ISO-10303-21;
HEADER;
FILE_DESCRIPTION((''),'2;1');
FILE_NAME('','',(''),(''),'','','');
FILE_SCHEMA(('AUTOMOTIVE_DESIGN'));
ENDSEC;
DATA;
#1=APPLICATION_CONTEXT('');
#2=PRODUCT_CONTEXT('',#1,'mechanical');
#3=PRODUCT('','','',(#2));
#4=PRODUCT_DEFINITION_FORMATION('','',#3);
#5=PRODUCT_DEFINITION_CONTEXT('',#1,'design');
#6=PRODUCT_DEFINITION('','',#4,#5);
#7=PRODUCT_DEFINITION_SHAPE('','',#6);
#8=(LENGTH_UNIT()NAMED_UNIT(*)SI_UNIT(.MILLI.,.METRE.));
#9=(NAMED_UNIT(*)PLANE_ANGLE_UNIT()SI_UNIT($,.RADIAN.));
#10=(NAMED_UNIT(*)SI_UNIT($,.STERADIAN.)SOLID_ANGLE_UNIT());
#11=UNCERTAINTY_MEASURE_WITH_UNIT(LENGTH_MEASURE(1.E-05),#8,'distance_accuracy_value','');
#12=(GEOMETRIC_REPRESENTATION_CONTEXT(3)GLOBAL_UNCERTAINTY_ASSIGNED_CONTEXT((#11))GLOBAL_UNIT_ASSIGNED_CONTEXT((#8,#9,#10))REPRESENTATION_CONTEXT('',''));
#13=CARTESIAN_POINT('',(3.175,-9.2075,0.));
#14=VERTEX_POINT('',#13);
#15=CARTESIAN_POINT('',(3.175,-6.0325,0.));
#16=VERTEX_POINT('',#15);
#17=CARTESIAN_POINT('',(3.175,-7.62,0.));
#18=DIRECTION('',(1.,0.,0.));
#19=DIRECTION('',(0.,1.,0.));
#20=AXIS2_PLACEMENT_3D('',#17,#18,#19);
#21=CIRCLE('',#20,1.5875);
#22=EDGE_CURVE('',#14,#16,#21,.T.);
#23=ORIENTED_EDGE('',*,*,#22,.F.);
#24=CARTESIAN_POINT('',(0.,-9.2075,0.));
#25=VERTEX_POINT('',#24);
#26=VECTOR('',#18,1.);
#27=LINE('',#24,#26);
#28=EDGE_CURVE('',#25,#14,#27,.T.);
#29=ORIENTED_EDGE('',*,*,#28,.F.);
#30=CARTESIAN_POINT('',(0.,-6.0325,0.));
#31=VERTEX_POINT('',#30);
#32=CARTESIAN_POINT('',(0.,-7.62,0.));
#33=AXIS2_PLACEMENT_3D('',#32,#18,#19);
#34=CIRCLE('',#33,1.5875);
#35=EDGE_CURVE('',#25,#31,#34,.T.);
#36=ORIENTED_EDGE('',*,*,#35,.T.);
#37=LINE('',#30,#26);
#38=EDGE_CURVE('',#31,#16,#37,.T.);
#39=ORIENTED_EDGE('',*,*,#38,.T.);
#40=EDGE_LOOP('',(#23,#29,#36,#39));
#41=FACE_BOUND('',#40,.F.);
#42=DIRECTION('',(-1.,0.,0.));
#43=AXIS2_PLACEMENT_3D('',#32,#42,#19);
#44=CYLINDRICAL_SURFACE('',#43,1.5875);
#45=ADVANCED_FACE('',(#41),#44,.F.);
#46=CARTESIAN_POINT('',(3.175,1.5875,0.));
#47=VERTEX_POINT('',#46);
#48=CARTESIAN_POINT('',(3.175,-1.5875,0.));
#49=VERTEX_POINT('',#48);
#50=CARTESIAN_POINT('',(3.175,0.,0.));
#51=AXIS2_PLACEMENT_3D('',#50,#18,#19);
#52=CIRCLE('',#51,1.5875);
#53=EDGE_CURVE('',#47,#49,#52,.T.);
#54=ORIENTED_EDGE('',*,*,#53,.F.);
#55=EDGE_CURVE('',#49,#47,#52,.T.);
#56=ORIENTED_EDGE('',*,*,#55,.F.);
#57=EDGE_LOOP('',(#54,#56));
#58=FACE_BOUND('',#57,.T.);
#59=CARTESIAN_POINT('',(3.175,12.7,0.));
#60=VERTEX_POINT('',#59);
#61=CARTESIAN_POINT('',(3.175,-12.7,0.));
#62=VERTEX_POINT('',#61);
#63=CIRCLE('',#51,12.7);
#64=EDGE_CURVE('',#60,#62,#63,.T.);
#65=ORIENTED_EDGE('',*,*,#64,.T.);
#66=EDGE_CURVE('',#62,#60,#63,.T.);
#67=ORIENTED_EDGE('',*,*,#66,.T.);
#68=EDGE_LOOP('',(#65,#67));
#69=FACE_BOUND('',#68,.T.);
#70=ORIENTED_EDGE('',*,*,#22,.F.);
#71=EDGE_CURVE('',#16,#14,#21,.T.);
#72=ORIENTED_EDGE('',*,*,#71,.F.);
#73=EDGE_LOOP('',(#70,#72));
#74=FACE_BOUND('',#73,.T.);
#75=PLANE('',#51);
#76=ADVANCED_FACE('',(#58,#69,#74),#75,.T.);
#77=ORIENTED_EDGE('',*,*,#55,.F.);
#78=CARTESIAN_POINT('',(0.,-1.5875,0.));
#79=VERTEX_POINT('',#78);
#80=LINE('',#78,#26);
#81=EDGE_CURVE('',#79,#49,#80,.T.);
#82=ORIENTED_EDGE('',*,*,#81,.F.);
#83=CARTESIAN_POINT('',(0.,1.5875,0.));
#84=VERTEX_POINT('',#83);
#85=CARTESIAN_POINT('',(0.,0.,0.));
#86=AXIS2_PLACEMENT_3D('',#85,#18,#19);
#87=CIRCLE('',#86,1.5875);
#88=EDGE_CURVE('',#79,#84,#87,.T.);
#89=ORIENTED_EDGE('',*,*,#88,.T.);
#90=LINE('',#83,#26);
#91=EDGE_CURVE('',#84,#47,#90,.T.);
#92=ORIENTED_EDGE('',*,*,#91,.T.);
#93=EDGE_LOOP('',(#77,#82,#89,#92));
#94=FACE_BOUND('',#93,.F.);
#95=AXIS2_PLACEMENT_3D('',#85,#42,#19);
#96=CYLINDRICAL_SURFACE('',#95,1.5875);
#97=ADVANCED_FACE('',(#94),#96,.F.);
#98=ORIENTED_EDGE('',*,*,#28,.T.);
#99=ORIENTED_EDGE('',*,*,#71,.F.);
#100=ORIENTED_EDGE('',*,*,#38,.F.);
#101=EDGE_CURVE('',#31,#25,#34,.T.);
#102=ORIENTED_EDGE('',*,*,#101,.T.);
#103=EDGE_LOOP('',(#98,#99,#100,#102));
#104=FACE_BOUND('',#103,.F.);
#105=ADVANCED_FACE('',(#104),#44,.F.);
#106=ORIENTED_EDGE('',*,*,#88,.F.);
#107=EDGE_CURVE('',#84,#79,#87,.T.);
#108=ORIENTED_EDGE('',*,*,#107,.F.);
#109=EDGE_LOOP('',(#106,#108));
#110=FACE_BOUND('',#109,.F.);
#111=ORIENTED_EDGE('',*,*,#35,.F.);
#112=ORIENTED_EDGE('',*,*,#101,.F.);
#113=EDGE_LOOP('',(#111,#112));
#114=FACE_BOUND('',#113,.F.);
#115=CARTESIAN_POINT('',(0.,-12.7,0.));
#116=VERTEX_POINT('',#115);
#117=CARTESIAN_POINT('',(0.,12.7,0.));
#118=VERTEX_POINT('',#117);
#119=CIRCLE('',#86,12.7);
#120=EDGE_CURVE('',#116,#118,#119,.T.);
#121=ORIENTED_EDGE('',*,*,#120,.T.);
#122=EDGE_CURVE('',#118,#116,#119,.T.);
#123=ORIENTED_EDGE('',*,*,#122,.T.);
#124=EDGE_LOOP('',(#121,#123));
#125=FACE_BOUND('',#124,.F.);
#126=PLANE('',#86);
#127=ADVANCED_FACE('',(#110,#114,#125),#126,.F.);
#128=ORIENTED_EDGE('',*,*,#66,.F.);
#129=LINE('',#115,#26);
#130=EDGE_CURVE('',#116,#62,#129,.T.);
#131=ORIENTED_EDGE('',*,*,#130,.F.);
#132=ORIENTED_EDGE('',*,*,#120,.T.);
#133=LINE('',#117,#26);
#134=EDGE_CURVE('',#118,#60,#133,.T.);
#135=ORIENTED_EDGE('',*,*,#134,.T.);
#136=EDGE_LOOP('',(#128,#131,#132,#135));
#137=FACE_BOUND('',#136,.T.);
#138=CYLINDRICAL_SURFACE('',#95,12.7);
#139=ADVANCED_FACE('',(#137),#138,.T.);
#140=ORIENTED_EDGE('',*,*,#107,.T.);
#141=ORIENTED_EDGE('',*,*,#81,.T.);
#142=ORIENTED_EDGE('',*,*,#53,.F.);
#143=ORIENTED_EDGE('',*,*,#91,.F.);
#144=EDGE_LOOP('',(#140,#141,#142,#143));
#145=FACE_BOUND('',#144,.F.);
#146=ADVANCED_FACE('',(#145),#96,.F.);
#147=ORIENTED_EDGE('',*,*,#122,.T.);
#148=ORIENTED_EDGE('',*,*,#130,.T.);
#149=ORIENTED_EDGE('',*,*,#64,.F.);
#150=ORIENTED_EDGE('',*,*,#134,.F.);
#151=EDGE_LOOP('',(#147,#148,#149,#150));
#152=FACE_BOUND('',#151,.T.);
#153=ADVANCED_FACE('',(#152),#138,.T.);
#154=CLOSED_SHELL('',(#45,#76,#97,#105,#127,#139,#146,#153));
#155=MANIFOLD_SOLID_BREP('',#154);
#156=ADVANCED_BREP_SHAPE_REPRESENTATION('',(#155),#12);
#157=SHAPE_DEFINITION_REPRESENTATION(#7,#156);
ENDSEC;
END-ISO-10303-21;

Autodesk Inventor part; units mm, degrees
ref_plane "YZ Plane" through (0, 0, 0) normal (1, 0, 0) x (0, 1, 0)
ref_plane "XZ Plane" through (0, 0, 0) normal (0, 1, 0) x (-1, 0, 0)
ref_plane "XY Plane" through (0, 0, 0) normal (0, 0, 1) x (1, 0, 0)
sketch "Sketch1" plane through (0, 0, 0) normal (1, 0, 0) x (0, 1, 0)
  circle A0 centre (0, 0) radius 12.7
  circle A1 centre (0, 0) radius 1.5875
  line L0 (-12.7, 0) -> (-1.5875, 0)
  circle A2 centre (-7.62, 0) radius 1.5875
  dimension "d0" = 25.4
  dimension "d1" = 3.175
  dimension "d2" = 3.175
  dimension "d3" = 5.08
extrude "Extrusion1" add sketch "Sketch1" along normal blind 3.175
properties part number "CURM_Caterpillar_wheel"
